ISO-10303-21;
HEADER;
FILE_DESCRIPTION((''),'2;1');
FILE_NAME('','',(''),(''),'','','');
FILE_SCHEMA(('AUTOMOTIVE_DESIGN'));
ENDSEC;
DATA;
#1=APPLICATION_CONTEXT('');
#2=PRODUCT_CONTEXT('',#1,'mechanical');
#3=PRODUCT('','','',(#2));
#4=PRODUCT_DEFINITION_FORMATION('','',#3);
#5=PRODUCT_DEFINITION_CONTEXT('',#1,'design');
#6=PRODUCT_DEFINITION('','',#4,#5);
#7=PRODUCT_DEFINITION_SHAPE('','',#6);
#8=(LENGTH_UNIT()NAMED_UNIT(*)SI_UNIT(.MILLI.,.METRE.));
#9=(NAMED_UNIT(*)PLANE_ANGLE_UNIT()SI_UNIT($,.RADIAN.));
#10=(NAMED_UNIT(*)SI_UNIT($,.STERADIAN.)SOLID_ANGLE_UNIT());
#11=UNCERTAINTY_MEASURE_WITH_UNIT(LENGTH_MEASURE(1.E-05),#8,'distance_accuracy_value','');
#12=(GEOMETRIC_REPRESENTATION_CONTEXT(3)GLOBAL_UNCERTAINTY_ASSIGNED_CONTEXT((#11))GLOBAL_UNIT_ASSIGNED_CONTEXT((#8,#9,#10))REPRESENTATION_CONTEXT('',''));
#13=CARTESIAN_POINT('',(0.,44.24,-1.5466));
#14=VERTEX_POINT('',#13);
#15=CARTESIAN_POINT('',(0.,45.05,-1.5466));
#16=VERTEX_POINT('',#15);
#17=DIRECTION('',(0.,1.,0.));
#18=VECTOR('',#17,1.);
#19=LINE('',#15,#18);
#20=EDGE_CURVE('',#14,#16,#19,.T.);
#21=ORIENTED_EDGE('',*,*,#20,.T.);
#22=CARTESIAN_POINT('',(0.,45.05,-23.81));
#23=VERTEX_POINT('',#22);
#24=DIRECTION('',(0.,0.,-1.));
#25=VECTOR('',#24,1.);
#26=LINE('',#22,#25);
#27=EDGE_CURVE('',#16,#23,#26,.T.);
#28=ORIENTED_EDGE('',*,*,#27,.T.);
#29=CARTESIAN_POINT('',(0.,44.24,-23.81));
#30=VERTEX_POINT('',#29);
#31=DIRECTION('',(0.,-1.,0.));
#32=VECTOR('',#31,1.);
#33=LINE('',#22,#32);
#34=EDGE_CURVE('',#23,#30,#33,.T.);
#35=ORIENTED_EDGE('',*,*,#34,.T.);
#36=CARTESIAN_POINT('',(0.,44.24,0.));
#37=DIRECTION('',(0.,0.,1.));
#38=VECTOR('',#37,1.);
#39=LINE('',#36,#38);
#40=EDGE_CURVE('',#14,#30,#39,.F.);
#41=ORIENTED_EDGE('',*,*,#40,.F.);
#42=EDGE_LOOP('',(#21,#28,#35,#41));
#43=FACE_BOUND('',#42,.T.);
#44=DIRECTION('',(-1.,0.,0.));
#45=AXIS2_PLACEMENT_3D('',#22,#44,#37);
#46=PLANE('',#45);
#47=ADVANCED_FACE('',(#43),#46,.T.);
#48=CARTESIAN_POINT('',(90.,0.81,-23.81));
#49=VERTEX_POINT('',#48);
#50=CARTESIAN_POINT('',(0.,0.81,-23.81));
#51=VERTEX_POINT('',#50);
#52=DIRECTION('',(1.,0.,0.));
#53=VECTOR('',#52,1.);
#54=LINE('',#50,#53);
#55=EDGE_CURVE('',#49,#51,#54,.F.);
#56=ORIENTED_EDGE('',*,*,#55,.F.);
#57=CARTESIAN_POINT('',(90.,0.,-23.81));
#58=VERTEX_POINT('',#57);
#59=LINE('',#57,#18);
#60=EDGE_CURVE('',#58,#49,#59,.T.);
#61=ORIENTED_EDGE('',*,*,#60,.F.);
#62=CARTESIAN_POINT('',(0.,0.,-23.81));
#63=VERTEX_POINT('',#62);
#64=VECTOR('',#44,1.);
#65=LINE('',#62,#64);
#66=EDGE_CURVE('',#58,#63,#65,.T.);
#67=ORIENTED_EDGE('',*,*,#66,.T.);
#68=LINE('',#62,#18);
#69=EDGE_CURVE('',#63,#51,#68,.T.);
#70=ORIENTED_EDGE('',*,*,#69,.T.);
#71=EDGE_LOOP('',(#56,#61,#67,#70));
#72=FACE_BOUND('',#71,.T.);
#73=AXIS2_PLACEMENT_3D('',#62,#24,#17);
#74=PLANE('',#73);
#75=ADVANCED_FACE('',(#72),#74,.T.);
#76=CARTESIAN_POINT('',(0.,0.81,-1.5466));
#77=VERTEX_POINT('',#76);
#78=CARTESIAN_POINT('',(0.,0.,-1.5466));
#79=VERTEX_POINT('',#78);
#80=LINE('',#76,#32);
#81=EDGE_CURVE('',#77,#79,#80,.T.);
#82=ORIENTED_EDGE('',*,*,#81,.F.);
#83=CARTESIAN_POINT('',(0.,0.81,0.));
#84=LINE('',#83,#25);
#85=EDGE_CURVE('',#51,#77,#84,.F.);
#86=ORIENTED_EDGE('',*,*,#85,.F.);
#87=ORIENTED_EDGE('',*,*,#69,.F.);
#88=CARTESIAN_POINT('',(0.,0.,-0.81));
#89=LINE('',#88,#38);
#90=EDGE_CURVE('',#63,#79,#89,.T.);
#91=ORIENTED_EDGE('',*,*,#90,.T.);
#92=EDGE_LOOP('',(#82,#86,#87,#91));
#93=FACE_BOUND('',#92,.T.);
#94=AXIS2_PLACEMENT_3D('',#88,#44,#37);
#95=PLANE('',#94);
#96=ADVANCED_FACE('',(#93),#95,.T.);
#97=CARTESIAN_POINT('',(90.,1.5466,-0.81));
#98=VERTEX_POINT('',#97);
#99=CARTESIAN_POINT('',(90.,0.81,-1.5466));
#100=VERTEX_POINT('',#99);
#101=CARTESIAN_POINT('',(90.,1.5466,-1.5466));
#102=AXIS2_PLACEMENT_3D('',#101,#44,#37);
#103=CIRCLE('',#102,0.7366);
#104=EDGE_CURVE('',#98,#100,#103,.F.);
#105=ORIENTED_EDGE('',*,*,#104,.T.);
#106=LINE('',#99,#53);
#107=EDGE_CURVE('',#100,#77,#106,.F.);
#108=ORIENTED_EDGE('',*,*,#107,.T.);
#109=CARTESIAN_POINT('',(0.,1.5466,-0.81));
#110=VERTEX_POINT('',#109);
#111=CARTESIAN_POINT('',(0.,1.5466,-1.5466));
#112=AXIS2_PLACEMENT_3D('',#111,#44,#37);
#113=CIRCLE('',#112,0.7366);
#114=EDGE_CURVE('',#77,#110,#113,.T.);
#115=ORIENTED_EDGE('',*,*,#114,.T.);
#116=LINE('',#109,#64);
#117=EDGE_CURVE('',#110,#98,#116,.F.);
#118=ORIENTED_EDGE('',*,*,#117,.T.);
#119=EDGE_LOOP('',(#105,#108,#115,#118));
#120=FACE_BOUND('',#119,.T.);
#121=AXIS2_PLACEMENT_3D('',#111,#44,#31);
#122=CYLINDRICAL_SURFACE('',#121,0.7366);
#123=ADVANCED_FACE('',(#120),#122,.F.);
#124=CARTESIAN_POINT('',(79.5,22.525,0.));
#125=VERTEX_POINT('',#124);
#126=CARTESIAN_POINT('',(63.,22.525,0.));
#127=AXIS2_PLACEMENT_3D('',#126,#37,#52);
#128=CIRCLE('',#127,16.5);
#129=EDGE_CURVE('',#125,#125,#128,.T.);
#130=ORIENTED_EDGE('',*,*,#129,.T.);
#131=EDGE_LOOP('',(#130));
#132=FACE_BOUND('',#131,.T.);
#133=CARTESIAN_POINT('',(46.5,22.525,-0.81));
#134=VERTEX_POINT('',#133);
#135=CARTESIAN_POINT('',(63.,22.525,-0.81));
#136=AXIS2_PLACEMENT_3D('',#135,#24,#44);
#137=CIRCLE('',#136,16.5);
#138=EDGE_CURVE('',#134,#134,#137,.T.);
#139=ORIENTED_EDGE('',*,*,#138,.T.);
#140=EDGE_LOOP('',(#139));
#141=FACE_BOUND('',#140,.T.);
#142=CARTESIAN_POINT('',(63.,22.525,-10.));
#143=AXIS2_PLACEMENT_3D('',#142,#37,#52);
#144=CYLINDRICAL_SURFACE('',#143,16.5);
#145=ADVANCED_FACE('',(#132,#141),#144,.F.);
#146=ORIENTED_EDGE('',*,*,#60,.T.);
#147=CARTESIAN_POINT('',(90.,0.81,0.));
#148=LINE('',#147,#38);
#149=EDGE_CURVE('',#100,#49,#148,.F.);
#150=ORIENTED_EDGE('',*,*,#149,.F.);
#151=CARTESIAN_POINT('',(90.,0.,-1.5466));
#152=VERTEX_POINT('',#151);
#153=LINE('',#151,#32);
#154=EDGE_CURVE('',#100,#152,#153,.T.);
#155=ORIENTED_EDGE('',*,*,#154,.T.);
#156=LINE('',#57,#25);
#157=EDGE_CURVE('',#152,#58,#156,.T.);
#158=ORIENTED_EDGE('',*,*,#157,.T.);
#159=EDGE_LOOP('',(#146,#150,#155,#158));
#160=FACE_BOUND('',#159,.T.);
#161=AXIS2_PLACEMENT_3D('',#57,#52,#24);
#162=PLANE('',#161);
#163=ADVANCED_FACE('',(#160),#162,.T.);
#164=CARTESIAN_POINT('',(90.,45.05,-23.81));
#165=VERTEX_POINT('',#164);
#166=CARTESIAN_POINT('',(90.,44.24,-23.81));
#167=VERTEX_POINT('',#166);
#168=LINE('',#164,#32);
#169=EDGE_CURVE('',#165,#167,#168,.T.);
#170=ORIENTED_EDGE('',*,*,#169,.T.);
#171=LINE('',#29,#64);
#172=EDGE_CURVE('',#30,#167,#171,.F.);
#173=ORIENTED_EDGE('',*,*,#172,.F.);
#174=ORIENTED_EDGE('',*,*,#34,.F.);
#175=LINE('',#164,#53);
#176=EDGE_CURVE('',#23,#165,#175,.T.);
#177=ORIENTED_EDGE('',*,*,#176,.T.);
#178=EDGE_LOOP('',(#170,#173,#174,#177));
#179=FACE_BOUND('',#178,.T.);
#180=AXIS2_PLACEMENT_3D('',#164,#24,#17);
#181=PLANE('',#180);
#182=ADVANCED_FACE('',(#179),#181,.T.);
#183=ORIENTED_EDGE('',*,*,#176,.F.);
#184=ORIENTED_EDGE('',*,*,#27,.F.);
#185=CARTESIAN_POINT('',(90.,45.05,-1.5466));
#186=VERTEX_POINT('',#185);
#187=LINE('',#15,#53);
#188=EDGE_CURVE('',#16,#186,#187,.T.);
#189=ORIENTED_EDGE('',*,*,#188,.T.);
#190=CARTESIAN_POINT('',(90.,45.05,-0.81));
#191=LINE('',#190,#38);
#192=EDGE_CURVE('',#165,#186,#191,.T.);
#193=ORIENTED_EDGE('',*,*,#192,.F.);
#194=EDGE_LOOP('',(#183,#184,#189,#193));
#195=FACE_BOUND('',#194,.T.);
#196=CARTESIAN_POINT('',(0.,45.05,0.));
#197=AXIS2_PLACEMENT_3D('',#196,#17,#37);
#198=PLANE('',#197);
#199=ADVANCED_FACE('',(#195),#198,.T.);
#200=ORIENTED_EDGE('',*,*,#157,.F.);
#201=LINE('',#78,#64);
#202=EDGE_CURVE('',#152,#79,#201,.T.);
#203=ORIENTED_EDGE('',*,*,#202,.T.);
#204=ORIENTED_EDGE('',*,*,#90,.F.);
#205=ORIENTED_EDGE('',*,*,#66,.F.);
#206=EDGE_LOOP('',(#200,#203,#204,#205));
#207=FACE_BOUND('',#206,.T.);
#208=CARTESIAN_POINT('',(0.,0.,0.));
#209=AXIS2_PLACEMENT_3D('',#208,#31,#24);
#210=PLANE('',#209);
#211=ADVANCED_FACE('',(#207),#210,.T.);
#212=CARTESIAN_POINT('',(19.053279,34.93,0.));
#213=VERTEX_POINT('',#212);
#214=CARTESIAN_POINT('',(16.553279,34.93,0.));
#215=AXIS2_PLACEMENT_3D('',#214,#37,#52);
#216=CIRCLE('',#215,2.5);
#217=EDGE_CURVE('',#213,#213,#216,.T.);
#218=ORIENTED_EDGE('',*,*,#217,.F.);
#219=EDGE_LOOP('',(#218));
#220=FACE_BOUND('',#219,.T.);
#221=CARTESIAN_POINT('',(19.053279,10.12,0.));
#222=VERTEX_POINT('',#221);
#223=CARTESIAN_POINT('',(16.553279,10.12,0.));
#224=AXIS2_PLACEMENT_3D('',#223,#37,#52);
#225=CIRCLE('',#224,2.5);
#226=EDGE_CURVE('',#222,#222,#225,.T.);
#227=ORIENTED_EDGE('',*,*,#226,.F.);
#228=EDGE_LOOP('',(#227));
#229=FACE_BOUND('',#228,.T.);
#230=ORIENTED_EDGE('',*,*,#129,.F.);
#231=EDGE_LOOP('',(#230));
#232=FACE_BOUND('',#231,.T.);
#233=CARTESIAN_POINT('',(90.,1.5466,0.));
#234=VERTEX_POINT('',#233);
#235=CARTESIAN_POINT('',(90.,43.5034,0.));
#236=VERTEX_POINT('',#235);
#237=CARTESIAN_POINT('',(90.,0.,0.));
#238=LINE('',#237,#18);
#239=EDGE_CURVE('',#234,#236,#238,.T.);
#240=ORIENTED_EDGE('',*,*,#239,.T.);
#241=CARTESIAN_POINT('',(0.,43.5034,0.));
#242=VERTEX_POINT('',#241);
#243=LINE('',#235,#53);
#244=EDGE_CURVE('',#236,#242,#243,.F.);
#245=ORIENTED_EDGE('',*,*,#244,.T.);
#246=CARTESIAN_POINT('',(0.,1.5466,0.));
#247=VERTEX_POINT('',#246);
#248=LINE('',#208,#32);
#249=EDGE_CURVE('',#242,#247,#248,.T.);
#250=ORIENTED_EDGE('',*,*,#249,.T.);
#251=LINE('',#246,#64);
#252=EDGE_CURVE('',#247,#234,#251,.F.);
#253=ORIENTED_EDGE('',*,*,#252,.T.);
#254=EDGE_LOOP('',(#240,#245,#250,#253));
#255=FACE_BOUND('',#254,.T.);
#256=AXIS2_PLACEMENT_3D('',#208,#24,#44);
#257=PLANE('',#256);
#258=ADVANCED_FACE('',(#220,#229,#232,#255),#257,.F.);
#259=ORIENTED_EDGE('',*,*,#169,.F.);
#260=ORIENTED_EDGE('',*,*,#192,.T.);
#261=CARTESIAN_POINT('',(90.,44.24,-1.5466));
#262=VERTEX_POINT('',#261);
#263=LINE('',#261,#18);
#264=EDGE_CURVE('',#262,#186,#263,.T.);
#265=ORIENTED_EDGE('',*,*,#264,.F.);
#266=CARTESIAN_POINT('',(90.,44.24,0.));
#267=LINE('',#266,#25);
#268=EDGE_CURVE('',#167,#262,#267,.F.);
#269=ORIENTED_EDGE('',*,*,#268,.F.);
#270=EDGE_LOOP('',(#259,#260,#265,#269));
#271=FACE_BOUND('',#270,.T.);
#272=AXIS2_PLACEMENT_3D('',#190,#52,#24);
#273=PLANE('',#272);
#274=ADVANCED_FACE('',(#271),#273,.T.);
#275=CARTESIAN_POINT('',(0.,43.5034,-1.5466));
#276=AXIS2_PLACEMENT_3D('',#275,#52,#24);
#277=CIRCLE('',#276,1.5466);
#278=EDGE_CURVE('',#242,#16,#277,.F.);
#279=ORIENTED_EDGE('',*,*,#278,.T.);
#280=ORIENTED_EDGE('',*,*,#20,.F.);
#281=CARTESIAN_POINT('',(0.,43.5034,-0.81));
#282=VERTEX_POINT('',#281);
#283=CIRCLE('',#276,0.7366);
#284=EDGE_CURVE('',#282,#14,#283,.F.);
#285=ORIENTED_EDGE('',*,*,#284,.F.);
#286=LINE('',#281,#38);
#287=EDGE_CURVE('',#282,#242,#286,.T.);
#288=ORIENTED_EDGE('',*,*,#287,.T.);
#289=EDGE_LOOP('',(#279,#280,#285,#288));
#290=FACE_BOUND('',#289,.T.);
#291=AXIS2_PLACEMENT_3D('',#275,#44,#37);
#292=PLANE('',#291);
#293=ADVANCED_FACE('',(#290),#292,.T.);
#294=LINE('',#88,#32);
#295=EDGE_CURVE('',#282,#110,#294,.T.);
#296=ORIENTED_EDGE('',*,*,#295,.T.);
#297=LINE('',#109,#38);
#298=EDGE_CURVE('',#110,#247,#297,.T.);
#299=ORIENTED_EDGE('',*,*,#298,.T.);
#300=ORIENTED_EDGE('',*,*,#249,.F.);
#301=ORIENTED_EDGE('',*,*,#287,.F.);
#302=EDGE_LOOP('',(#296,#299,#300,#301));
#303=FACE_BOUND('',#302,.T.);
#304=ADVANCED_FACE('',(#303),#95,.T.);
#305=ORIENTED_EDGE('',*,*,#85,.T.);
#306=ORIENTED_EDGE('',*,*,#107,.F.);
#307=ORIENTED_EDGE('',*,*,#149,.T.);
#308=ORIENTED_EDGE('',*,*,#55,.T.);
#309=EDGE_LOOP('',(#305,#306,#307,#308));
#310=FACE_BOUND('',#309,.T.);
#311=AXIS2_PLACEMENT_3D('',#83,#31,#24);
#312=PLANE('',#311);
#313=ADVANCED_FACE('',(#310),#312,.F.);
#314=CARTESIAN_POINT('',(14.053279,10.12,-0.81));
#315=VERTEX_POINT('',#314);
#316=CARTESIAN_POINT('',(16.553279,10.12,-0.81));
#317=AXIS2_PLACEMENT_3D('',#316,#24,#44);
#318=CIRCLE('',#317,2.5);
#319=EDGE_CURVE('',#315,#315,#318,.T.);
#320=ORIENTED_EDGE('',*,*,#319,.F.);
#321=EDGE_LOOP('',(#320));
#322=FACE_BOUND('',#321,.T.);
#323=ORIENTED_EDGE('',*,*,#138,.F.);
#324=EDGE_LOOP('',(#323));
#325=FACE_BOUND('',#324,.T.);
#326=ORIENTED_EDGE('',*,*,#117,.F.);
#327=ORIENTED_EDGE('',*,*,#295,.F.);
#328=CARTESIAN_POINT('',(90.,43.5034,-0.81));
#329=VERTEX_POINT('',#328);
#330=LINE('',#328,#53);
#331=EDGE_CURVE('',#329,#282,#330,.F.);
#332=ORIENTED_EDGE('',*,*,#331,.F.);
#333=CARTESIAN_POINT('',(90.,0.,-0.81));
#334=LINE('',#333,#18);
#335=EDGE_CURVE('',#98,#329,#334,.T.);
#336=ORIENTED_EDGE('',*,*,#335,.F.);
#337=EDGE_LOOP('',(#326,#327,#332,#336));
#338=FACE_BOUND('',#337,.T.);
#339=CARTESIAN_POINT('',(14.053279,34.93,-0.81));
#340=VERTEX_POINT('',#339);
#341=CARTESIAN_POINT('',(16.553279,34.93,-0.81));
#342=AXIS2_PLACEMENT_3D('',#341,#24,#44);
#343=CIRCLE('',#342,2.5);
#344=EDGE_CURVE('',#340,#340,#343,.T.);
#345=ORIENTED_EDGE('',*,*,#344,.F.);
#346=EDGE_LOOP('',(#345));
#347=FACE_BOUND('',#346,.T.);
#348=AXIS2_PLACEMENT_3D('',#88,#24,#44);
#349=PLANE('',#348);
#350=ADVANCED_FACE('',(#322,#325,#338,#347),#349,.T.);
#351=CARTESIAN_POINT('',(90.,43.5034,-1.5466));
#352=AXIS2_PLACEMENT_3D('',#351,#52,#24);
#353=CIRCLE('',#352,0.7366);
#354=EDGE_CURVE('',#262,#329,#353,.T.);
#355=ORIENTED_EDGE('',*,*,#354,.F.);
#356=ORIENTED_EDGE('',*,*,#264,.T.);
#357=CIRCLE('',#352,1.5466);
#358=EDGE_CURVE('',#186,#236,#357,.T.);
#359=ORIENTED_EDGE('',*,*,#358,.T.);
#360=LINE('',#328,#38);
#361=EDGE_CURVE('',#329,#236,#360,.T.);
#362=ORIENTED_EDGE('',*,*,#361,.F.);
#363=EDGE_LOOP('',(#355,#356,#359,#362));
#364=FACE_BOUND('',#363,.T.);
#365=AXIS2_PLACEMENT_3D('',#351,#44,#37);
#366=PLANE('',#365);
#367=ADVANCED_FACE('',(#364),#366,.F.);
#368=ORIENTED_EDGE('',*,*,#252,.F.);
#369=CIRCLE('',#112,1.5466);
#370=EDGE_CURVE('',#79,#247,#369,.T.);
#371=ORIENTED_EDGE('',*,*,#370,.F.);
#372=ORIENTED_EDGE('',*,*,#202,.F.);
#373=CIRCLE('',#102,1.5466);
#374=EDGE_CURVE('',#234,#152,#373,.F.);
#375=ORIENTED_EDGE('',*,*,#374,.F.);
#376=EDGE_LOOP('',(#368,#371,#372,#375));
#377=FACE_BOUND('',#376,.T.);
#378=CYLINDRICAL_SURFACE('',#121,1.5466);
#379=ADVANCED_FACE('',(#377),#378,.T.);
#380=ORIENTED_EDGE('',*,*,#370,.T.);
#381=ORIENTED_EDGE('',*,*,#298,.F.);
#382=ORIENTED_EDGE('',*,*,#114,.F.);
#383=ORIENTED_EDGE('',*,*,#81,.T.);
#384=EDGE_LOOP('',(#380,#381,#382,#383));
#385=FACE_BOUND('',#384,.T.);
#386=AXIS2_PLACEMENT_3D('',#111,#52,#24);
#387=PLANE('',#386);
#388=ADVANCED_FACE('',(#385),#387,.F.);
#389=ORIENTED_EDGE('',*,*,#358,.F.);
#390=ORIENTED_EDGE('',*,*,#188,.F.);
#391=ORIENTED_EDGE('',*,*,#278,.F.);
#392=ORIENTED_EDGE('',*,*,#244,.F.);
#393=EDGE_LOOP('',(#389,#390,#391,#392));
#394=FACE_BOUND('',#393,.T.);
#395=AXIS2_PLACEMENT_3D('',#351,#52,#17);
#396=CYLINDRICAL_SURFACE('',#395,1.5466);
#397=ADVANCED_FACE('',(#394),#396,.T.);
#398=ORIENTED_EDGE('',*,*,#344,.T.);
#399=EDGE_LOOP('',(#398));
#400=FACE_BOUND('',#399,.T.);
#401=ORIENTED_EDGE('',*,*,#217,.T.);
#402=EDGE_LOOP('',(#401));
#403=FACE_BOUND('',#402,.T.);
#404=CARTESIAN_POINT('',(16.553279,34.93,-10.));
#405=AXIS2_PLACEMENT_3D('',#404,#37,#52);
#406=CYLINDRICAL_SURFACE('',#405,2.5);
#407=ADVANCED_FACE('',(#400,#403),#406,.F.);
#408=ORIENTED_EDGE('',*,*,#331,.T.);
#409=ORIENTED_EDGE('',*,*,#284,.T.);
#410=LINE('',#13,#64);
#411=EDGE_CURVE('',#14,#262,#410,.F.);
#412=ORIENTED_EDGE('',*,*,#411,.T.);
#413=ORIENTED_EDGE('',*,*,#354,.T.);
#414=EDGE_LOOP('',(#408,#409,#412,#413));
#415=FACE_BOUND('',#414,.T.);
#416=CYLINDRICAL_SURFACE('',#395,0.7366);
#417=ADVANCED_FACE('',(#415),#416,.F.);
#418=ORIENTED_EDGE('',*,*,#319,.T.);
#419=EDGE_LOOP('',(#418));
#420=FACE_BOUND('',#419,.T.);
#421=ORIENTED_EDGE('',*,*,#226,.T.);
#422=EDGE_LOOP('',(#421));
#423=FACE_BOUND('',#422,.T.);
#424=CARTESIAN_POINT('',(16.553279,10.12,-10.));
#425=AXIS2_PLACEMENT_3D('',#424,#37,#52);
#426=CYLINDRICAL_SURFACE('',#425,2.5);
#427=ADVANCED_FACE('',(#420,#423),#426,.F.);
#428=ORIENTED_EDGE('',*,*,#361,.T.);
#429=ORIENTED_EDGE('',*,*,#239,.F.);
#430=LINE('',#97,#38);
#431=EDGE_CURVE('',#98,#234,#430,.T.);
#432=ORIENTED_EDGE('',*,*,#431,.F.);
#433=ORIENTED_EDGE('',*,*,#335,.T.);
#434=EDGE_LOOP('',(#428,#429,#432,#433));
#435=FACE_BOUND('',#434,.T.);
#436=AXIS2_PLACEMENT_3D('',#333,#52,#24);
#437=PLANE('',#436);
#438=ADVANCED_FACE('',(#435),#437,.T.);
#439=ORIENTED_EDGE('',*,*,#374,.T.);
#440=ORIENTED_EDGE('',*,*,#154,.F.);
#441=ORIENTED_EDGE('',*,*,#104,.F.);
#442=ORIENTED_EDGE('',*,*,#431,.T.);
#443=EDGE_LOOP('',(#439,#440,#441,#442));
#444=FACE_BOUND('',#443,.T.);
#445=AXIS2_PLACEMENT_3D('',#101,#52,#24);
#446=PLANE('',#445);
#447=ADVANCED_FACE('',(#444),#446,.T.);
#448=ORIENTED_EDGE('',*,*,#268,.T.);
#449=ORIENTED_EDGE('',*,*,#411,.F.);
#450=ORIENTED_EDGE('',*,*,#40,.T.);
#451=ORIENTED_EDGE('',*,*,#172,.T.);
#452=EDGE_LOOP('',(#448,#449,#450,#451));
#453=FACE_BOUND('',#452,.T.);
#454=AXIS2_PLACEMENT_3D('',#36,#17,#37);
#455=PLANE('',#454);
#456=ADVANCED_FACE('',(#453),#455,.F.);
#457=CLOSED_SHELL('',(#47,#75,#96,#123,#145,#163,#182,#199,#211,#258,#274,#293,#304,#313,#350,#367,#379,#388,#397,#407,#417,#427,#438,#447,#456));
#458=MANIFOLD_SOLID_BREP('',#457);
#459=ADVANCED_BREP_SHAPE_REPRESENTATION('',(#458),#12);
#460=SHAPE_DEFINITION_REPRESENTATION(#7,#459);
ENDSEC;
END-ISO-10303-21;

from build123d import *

# Parameters (mm, degrees)
SKETCH1_W                    = 90
SKETCH1_H                    = 45.05
BASE_FLANGE1_DEPTH           = 0.81
EDGE_FLANGE1_STRIP_W         = 4.7132
EDGE_FLANGE1_STRIP_H         = 0.81
EDGE_FLANGE1_STRIP_CUT_DEPTH = 90
EDGE_FLANGE1_DEPTH           = 90
EDGE_FLANGE2_STRIP_W         = 4.7132
EDGE_FLANGE2_STRIP_H         = 0.81
EDGE_FLANGE2_STRIP_CUT_DEPTH = 90
EDGE_FLANGE2_DEPTH           = 90
SKETCH9_R                    = 16.5
SKETCH9_R_2                  = 2.5
CUT_EXTRUDE1_DEPTH           = 10


# Sheet-metal steps are written as plain solids
with BuildPart() as part:
    # Sketch1 → Base-Flange1 (new body)
    with BuildSketch(Plane.XY):
        with Locations((45, 22.525)):
            Rectangle(SKETCH1_W, SKETCH1_H)
    extrude(amount=-BASE_FLANGE1_DEPTH)

    # Edge-Flange1 strip (across the edge) → Edge-Flange1 strip cut (cut)
    with BuildSketch(Plane(origin=(0, 45.05, -0.81), x_dir=(0, -1, 0), z_dir=(1, 0, 0))):
        with Locations((-0.81, -0.405)):
            Rectangle(EDGE_FLANGE1_STRIP_W, EDGE_FLANGE1_STRIP_H)
    extrude(amount=EDGE_FLANGE1_STRIP_CUT_DEPTH, mode=Mode.SUBTRACT)

    # Edge-Flange1 section (across the edge) → Edge-Flange1 (add)
    with BuildSketch(Plane(origin=(0, 45.05, -0.81), x_dir=(0, -1, 0), z_dir=(1, 0, 0))):
        with BuildLine():
            Line((0, 0.7366), (0, 23))
            Line((0, 23), (0.81, 23))
            Line((0.81, 23), (0.81, 0.7366))
            ThreePointArc((0.81, 0.7366), (1.025745145, 0.215745145), (1.5466, 0))
            Line((1.5466, 0), (1.5466, -0.81))
            ThreePointArc((1.5466, -0.81), (0.452988652, -0.357011348), (0, 0.7366))
        make_face()
    extrude(amount=EDGE_FLANGE1_DEPTH)

    # Edge-Flange2 strip (across the edge) → Edge-Flange2 strip cut (cut)
    with BuildSketch(Plane(origin=(90, 0, -0.81), x_dir=(0, 1, 0), z_dir=(-1, 0, 0))):
        with Locations((-0.81, -0.405)):
            Rectangle(EDGE_FLANGE2_STRIP_W, EDGE_FLANGE2_STRIP_H)
    extrude(amount=EDGE_FLANGE2_STRIP_CUT_DEPTH, mode=Mode.SUBTRACT)

    # Edge-Flange2 section (across the edge) → Edge-Flange2 (add)
    with BuildSketch(Plane(origin=(90, 0, -0.81), x_dir=(0, 1, 0), z_dir=(-1, 0, 0))):
        with BuildLine():
            Line((0, 0.7366), (0, 23))
            Line((0, 23), (0.81, 23))
            Line((0.81, 23), (0.81, 0.7366))
            ThreePointArc((0.81, 0.7366), (1.025745145, 0.215745145), (1.5466, 0))
            Line((1.5466, 0), (1.5466, -0.81))
            ThreePointArc((1.5466, -0.81), (0.452988652, -0.357011348), (0, 0.7366))
        make_face()
    extrude(amount=EDGE_FLANGE2_DEPTH)

    # Sketch9 → Cut-Extrude1 (cut)
    with BuildSketch(Plane.XY):
        with Locations((63, 22.525)):
            Circle(SKETCH9_R)
        with Locations((16.55327865, 10.12)):
            Circle(SKETCH9_R_2)
        with Locations((16.55327865, 34.93)):
            Circle(SKETCH9_R_2)
    extrude(amount=-CUT_EXTRUDE1_DEPTH, mode=Mode.SUBTRACT)


solid = part.part
